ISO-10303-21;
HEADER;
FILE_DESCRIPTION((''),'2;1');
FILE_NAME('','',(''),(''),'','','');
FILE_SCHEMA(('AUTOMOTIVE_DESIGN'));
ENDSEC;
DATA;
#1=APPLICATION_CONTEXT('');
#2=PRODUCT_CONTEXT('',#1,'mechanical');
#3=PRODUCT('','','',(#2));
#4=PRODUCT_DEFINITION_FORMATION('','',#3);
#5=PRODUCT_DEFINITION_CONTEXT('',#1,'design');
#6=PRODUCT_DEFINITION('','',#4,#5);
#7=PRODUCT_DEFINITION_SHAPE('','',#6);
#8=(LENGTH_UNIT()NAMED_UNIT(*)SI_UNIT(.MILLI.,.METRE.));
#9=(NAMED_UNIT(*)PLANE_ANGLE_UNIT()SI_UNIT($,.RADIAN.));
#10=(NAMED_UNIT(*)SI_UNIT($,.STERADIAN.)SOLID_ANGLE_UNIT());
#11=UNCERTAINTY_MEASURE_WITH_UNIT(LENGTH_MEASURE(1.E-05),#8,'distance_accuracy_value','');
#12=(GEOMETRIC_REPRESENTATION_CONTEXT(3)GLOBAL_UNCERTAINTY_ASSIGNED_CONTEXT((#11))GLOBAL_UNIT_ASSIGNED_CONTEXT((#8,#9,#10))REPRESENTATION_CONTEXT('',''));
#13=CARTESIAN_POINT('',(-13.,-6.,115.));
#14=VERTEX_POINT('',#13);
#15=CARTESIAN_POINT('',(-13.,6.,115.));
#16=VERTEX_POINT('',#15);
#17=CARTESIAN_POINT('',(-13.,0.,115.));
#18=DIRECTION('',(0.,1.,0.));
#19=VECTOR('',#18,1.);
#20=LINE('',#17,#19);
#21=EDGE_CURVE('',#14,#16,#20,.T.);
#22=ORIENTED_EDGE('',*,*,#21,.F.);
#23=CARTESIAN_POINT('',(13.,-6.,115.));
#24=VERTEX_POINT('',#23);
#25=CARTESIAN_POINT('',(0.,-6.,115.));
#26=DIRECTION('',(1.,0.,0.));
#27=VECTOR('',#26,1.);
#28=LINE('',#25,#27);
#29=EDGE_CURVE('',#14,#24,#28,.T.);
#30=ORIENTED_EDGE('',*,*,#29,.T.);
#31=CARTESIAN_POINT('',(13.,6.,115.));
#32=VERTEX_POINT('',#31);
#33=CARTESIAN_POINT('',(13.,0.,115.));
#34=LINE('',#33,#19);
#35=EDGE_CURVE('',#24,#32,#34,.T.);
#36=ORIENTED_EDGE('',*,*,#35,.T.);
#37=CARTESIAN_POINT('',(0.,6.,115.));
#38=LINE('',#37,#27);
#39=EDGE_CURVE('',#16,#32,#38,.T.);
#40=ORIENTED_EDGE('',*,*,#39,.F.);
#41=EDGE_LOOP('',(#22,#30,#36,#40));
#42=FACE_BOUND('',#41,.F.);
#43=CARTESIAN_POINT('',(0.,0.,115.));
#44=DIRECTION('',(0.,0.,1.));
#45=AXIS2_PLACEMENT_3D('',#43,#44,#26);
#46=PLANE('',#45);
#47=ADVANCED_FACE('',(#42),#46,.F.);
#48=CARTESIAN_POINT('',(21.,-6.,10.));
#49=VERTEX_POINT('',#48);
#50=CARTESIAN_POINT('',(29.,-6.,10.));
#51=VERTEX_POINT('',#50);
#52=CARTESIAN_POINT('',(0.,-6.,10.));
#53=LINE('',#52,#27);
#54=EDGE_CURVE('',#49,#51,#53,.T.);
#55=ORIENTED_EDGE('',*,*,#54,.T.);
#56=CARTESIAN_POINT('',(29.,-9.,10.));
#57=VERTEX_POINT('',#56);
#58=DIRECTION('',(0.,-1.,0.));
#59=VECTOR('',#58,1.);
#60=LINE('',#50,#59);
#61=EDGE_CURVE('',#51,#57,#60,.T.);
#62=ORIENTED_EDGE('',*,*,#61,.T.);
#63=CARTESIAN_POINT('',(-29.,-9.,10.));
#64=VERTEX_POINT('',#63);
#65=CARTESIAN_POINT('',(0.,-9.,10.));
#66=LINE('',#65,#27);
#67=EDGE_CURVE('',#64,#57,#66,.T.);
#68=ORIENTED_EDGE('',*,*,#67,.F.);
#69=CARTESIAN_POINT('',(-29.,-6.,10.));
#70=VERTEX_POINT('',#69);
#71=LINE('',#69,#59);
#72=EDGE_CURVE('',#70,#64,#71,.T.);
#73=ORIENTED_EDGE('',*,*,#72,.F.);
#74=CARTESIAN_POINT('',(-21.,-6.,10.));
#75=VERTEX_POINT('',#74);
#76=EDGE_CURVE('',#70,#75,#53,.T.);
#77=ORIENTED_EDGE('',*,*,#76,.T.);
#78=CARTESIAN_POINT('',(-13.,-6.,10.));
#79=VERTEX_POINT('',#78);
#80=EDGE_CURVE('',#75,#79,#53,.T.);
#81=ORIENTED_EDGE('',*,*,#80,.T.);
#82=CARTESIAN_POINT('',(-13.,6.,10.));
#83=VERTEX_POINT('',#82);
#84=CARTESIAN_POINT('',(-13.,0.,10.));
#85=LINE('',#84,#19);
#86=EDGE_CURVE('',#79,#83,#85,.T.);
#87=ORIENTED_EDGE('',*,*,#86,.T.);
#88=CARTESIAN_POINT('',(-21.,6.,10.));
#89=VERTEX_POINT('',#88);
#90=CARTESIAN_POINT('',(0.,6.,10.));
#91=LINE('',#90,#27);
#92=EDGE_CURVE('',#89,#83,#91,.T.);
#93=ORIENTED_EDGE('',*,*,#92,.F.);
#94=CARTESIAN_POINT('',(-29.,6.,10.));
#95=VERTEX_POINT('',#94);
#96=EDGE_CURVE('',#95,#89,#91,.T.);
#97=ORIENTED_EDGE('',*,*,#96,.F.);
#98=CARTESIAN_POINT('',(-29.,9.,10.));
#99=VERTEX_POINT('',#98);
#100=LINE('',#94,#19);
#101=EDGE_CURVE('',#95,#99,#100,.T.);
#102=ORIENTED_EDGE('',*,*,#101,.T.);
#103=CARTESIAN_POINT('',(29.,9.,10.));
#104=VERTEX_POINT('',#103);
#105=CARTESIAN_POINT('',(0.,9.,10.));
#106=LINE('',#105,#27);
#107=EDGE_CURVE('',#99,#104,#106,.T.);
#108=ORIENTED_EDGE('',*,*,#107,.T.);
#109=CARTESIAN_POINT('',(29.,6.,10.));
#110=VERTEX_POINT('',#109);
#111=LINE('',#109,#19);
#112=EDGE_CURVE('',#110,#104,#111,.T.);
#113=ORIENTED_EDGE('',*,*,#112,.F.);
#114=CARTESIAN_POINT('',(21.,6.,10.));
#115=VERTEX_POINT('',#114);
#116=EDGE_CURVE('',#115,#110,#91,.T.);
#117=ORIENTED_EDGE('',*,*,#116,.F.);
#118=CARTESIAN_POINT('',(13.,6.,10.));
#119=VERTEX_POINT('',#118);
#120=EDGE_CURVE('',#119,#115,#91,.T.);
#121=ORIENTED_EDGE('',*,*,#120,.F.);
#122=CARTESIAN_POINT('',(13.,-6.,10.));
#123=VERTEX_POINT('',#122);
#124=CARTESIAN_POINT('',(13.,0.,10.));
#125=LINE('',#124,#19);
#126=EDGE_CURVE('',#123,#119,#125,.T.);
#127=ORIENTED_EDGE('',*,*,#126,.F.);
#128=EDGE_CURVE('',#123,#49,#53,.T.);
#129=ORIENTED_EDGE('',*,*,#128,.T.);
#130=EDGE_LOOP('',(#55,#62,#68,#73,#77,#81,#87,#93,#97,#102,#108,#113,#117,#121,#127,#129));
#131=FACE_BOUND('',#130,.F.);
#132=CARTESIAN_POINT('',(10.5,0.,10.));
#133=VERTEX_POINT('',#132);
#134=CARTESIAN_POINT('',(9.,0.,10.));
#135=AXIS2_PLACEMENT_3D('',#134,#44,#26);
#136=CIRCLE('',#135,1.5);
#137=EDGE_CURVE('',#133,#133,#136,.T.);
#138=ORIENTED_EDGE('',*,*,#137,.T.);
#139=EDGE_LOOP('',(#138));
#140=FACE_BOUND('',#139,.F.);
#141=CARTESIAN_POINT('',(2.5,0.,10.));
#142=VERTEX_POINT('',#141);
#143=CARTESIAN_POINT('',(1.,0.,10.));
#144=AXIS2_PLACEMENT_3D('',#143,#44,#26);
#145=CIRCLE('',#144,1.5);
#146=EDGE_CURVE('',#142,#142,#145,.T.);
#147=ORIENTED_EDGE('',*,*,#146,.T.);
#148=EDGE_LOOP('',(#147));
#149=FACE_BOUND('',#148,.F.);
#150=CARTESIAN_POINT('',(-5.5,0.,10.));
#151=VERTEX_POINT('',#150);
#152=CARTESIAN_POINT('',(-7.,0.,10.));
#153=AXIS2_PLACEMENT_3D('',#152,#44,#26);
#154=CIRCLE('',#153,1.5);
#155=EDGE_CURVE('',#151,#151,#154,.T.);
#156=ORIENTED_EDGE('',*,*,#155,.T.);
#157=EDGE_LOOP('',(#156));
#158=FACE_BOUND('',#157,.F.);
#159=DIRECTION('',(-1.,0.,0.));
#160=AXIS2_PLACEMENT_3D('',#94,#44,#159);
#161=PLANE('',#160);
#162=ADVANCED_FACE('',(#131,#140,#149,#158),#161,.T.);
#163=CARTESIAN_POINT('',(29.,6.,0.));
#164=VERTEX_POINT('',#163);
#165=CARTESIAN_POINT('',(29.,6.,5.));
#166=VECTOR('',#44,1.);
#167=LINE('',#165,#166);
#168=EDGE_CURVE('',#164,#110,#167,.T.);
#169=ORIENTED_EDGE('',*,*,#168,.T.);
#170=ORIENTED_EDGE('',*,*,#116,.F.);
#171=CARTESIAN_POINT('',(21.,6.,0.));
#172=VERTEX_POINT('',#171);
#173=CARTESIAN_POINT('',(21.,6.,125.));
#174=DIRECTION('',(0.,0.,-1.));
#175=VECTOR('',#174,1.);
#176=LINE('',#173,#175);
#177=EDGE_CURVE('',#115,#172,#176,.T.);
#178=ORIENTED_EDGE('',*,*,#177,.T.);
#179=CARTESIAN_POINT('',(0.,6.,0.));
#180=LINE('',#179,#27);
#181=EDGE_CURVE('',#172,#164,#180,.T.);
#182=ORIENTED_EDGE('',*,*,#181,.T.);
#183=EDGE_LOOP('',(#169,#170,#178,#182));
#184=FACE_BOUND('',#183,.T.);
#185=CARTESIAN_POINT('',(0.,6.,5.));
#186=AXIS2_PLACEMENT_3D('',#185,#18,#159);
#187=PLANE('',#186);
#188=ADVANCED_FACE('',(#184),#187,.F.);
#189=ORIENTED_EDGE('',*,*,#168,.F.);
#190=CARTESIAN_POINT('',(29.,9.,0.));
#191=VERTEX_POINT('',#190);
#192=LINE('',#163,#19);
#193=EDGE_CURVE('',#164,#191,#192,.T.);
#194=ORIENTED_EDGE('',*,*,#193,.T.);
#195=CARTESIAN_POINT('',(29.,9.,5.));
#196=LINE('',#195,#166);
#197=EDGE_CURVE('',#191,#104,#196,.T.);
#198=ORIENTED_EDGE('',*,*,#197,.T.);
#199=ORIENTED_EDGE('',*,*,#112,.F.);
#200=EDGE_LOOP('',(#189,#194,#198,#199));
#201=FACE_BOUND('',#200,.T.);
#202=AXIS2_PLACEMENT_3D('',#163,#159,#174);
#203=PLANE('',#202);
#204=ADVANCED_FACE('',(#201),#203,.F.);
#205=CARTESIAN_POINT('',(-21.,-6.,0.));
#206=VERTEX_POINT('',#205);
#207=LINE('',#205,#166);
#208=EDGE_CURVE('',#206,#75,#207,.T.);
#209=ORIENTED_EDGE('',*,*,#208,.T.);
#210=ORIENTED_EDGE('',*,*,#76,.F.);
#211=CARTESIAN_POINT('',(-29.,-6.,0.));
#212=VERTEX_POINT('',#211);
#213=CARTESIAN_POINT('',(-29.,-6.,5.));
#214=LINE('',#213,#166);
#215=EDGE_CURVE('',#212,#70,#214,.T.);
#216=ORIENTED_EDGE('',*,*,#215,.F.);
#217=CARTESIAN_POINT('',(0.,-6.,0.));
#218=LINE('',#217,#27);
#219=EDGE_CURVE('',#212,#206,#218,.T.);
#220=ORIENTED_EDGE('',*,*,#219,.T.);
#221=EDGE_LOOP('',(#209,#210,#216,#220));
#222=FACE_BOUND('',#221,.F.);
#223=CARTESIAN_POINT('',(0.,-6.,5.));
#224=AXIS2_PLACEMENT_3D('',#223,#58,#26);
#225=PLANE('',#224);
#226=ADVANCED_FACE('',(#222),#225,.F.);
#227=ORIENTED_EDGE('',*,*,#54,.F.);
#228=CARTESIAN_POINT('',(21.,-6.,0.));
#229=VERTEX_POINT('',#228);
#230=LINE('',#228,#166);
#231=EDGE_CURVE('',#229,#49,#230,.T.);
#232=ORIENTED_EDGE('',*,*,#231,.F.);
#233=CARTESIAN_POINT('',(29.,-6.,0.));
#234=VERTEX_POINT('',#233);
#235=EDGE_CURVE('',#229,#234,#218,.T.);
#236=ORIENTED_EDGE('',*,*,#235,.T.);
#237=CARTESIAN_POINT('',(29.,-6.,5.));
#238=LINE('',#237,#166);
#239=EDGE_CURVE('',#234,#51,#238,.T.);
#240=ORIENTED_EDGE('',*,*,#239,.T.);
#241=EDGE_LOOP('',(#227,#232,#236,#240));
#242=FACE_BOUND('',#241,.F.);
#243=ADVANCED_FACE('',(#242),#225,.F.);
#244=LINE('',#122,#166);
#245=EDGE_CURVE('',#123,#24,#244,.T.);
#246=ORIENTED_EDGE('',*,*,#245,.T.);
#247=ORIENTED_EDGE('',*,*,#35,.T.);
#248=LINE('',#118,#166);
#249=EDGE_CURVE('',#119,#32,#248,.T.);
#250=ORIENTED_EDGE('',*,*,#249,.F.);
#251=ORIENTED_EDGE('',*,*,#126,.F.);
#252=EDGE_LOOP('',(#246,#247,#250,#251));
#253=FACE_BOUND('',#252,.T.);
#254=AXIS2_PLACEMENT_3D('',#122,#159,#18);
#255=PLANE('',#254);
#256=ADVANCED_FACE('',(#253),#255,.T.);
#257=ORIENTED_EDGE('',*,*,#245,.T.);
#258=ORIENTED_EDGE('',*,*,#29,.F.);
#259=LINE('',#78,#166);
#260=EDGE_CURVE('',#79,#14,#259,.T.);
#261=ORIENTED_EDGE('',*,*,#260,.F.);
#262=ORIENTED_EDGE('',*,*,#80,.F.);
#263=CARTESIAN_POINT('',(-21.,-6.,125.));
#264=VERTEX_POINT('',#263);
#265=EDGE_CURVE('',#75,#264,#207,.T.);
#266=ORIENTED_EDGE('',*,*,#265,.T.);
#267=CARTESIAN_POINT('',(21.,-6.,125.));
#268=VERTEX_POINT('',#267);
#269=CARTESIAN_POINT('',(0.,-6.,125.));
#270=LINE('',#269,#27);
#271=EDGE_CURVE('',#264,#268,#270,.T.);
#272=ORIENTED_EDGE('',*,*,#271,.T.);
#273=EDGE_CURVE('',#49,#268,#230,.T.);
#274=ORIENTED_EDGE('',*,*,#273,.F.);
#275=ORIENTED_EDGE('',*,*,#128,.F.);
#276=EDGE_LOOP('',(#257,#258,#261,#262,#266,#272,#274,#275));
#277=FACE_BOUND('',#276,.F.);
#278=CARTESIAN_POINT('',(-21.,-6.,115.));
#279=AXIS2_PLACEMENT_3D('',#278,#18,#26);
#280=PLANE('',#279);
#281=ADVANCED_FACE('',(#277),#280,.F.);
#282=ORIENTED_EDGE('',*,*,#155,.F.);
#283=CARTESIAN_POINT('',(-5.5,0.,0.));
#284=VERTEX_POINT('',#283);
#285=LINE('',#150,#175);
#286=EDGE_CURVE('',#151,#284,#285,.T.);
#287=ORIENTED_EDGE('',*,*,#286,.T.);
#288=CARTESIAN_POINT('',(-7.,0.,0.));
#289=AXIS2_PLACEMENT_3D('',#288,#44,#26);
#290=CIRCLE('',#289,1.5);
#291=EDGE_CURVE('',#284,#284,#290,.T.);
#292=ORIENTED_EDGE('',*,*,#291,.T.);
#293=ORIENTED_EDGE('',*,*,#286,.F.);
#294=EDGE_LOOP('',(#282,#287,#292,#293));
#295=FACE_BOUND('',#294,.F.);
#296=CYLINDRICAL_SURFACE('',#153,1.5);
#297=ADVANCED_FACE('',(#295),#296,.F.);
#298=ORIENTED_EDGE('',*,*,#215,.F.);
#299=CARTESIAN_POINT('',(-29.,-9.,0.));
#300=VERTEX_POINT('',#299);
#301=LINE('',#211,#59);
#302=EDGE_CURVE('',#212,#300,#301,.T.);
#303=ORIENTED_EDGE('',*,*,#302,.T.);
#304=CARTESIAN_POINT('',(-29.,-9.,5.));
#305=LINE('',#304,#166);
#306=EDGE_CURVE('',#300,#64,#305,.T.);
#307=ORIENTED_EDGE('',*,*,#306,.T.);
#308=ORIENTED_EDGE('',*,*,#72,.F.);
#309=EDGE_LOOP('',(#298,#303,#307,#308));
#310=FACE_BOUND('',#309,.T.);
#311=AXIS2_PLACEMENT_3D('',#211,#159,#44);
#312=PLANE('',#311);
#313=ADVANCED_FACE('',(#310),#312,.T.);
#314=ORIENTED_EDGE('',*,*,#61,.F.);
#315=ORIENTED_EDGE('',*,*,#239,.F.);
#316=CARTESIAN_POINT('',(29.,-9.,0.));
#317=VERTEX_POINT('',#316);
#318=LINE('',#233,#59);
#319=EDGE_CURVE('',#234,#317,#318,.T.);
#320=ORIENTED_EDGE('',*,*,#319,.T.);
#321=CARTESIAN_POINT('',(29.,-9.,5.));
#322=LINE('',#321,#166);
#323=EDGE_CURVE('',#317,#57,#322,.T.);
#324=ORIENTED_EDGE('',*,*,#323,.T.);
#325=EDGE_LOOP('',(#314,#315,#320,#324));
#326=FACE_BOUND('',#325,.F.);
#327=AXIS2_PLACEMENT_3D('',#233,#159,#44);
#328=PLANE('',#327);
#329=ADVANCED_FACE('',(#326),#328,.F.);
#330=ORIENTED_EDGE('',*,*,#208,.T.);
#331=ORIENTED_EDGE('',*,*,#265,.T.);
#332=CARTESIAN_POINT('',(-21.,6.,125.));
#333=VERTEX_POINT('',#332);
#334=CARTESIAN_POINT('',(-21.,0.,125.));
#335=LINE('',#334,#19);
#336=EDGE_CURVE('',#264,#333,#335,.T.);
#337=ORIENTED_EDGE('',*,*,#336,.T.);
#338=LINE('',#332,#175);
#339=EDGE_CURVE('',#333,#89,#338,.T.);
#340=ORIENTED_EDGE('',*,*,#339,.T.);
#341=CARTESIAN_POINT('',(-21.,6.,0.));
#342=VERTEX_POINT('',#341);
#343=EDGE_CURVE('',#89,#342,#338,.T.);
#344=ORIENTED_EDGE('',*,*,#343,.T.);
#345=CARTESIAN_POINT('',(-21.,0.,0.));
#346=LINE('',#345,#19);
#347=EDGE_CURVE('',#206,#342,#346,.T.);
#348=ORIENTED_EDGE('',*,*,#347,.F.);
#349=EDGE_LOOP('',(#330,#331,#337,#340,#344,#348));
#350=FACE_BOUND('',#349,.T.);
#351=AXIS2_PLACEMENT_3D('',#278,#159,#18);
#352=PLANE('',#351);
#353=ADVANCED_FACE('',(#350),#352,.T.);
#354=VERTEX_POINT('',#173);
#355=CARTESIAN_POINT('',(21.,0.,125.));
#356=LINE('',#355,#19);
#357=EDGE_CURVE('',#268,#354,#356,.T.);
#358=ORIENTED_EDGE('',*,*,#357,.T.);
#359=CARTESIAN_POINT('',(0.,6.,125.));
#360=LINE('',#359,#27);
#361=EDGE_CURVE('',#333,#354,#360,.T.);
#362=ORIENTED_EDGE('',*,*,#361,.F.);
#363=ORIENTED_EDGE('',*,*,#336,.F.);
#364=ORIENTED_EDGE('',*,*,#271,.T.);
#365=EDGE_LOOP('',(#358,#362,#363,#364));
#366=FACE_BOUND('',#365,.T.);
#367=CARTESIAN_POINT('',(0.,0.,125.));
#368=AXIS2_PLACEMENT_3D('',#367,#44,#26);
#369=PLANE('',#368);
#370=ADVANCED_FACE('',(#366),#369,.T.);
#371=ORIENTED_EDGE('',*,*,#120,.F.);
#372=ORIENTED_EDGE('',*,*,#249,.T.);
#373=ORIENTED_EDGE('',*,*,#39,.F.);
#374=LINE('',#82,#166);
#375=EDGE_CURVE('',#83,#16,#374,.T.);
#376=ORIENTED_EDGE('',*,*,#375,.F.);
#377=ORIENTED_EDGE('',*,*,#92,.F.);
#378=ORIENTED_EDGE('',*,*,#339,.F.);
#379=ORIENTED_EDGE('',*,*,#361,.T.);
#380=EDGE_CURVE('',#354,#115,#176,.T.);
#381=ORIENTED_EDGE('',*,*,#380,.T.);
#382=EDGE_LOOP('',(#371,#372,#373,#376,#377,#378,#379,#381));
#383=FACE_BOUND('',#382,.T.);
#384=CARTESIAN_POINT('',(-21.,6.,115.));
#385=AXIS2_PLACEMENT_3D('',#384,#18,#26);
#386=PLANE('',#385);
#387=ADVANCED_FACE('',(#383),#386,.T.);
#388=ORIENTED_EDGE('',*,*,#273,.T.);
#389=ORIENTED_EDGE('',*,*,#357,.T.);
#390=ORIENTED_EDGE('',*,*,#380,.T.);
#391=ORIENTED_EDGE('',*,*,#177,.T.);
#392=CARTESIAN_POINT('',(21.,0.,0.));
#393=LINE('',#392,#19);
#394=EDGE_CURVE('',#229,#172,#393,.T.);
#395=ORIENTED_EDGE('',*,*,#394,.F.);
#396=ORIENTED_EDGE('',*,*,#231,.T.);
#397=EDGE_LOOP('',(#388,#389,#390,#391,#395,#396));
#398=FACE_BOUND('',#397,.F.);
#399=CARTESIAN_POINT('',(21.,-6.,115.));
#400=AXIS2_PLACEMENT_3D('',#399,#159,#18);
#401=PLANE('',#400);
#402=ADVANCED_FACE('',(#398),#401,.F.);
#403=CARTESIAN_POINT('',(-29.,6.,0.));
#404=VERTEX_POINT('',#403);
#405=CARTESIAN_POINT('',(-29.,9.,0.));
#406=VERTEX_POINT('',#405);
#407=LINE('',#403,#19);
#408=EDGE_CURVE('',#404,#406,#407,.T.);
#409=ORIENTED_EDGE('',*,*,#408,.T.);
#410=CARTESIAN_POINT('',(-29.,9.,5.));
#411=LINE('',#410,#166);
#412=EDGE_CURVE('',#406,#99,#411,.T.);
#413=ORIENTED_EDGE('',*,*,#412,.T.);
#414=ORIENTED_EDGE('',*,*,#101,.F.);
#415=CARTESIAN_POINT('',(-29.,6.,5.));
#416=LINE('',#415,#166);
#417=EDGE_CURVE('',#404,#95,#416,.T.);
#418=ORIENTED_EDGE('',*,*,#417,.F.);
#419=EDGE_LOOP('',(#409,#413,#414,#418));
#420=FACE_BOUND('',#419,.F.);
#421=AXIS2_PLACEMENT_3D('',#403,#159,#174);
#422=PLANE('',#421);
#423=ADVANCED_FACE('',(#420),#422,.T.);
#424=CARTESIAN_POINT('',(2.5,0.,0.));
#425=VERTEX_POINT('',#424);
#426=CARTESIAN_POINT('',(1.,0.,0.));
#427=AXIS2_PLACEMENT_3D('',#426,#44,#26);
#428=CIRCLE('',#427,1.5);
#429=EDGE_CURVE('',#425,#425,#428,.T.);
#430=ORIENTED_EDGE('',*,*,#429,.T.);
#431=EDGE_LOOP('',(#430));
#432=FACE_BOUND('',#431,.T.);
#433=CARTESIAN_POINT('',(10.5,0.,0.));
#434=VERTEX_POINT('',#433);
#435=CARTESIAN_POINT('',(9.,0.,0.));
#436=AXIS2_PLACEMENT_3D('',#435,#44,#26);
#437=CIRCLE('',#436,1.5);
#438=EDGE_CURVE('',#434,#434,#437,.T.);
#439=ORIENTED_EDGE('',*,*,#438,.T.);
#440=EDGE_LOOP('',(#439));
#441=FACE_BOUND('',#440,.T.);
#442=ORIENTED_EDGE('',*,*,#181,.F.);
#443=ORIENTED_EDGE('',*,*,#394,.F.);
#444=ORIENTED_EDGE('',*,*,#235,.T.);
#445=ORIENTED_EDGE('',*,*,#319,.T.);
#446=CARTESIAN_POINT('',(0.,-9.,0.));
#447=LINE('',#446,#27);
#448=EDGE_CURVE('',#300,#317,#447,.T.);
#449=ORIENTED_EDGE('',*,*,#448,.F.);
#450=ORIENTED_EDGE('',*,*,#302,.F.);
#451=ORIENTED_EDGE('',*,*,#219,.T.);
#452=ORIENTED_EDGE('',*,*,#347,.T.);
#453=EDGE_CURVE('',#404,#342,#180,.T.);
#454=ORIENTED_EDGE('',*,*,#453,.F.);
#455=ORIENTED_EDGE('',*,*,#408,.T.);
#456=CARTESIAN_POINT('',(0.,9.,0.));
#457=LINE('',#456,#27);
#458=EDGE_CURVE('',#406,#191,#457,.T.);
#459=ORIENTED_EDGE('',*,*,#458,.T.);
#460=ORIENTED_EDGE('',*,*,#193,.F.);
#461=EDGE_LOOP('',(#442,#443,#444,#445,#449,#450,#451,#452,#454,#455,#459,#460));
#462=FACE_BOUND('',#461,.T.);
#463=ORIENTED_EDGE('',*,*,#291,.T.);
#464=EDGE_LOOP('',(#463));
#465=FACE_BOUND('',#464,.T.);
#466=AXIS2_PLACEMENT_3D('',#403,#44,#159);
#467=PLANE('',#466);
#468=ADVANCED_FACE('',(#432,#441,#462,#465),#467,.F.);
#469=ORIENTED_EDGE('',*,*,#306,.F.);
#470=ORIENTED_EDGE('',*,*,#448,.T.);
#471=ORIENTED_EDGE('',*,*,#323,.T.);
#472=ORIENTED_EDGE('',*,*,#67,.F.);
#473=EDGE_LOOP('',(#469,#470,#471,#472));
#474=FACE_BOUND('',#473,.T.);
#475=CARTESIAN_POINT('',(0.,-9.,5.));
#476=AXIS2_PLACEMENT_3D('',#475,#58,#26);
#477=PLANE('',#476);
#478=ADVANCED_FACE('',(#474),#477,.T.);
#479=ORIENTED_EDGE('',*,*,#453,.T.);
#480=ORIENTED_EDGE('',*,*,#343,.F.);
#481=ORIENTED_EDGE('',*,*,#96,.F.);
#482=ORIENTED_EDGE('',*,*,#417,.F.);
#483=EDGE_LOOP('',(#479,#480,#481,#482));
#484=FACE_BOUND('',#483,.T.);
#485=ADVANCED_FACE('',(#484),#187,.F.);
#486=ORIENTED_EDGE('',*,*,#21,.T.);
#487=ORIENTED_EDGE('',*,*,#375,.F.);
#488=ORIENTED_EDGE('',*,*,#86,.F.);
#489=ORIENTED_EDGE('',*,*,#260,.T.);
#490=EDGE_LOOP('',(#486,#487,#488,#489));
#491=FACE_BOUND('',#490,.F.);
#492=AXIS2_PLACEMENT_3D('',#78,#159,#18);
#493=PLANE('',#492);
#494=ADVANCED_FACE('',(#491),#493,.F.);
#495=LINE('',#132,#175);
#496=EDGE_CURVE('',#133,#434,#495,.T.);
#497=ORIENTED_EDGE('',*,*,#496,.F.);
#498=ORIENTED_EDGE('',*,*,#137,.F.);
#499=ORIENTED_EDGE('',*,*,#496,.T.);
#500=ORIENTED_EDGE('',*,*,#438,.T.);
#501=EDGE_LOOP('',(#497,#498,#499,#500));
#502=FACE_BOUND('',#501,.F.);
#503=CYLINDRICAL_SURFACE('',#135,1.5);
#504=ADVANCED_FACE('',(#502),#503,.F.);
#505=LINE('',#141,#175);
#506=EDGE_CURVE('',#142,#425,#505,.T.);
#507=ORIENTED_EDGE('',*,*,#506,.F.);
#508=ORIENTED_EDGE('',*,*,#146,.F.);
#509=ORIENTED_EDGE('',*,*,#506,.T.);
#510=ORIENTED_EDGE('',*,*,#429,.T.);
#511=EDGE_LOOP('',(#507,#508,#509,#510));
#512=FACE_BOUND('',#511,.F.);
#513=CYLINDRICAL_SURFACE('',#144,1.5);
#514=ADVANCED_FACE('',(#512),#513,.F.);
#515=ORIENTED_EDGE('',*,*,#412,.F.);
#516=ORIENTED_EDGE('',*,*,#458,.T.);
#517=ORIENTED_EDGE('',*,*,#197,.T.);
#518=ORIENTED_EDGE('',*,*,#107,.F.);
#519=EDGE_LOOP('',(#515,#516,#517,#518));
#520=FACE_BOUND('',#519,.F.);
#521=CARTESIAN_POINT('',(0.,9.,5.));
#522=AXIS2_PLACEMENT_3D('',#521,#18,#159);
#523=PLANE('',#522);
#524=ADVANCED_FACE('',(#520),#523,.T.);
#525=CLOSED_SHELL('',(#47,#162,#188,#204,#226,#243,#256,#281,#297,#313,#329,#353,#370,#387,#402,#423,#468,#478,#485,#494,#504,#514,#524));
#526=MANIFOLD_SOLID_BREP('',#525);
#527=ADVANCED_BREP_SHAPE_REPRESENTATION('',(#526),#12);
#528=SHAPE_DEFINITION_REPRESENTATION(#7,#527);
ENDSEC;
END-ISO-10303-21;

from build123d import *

# Parameters (mm, degrees)
F0_W     = 42
F0_H     = 12
F1_DEPTH = 10
F2_W     = 8
F2_H     = 12
F3_DEPTH = 105
F4_W     = 42
F4_H     = 12
F5_DEPTH = 10
F6_W     = 58
F6_H     = 10
F7_DEPTH = 3
F8_R     = 1.5
F9_DEPTH = 9.9999997765


# Not quite as in the source:
# - a pattern or mirror of a feature is missing from the dataset's text; its kind, count and spacing are read off the source's solid


with BuildPart() as f1:
    # F0 (on Top) → F1 (new body)
    with BuildSketch(Plane.XY):
        Rectangle(F0_W, F0_H)
    extrude(amount=F1_DEPTH)

    # F2 (on face) → F3 (join)
    with BuildSketch(Plane.XY.offset(10)):
        with Locations((-17, 0)):
            Rectangle(F2_W, F2_H)
        with Locations((17, 0)):
            Rectangle(F2_W, F2_H)
    extrude(amount=F3_DEPTH)

    # F4 (on face) → F5 (join)
    with BuildSketch(Plane.XY.offset(115)):
        Rectangle(F4_W, F4_H)
    extrude(amount=F5_DEPTH)

    # F6 (on face) → F7 (join)
    with BuildSketch(Plane.XZ.offset(6)):
        with Locations((0, 5)):
            Rectangle(F6_W, F6_H)
    f7 = extrude(amount=F7_DEPTH)

    # F7_copies: F7 across plane
    add(f7.mirror(Plane.ZX))

    # F8 (on face) → F9 (cut)
    with BuildSketch(Plane.XY.offset(10)):
        with Locations((-7, 0)):
            Circle(F8_R)
        with Locations((1, 0)):
            Circle(F8_R)
        with Locations((9, 0)):
            Circle(F8_R)
    extrude(amount=-F9_DEPTH, mode=Mode.SUBTRACT)


solid = f1.part
